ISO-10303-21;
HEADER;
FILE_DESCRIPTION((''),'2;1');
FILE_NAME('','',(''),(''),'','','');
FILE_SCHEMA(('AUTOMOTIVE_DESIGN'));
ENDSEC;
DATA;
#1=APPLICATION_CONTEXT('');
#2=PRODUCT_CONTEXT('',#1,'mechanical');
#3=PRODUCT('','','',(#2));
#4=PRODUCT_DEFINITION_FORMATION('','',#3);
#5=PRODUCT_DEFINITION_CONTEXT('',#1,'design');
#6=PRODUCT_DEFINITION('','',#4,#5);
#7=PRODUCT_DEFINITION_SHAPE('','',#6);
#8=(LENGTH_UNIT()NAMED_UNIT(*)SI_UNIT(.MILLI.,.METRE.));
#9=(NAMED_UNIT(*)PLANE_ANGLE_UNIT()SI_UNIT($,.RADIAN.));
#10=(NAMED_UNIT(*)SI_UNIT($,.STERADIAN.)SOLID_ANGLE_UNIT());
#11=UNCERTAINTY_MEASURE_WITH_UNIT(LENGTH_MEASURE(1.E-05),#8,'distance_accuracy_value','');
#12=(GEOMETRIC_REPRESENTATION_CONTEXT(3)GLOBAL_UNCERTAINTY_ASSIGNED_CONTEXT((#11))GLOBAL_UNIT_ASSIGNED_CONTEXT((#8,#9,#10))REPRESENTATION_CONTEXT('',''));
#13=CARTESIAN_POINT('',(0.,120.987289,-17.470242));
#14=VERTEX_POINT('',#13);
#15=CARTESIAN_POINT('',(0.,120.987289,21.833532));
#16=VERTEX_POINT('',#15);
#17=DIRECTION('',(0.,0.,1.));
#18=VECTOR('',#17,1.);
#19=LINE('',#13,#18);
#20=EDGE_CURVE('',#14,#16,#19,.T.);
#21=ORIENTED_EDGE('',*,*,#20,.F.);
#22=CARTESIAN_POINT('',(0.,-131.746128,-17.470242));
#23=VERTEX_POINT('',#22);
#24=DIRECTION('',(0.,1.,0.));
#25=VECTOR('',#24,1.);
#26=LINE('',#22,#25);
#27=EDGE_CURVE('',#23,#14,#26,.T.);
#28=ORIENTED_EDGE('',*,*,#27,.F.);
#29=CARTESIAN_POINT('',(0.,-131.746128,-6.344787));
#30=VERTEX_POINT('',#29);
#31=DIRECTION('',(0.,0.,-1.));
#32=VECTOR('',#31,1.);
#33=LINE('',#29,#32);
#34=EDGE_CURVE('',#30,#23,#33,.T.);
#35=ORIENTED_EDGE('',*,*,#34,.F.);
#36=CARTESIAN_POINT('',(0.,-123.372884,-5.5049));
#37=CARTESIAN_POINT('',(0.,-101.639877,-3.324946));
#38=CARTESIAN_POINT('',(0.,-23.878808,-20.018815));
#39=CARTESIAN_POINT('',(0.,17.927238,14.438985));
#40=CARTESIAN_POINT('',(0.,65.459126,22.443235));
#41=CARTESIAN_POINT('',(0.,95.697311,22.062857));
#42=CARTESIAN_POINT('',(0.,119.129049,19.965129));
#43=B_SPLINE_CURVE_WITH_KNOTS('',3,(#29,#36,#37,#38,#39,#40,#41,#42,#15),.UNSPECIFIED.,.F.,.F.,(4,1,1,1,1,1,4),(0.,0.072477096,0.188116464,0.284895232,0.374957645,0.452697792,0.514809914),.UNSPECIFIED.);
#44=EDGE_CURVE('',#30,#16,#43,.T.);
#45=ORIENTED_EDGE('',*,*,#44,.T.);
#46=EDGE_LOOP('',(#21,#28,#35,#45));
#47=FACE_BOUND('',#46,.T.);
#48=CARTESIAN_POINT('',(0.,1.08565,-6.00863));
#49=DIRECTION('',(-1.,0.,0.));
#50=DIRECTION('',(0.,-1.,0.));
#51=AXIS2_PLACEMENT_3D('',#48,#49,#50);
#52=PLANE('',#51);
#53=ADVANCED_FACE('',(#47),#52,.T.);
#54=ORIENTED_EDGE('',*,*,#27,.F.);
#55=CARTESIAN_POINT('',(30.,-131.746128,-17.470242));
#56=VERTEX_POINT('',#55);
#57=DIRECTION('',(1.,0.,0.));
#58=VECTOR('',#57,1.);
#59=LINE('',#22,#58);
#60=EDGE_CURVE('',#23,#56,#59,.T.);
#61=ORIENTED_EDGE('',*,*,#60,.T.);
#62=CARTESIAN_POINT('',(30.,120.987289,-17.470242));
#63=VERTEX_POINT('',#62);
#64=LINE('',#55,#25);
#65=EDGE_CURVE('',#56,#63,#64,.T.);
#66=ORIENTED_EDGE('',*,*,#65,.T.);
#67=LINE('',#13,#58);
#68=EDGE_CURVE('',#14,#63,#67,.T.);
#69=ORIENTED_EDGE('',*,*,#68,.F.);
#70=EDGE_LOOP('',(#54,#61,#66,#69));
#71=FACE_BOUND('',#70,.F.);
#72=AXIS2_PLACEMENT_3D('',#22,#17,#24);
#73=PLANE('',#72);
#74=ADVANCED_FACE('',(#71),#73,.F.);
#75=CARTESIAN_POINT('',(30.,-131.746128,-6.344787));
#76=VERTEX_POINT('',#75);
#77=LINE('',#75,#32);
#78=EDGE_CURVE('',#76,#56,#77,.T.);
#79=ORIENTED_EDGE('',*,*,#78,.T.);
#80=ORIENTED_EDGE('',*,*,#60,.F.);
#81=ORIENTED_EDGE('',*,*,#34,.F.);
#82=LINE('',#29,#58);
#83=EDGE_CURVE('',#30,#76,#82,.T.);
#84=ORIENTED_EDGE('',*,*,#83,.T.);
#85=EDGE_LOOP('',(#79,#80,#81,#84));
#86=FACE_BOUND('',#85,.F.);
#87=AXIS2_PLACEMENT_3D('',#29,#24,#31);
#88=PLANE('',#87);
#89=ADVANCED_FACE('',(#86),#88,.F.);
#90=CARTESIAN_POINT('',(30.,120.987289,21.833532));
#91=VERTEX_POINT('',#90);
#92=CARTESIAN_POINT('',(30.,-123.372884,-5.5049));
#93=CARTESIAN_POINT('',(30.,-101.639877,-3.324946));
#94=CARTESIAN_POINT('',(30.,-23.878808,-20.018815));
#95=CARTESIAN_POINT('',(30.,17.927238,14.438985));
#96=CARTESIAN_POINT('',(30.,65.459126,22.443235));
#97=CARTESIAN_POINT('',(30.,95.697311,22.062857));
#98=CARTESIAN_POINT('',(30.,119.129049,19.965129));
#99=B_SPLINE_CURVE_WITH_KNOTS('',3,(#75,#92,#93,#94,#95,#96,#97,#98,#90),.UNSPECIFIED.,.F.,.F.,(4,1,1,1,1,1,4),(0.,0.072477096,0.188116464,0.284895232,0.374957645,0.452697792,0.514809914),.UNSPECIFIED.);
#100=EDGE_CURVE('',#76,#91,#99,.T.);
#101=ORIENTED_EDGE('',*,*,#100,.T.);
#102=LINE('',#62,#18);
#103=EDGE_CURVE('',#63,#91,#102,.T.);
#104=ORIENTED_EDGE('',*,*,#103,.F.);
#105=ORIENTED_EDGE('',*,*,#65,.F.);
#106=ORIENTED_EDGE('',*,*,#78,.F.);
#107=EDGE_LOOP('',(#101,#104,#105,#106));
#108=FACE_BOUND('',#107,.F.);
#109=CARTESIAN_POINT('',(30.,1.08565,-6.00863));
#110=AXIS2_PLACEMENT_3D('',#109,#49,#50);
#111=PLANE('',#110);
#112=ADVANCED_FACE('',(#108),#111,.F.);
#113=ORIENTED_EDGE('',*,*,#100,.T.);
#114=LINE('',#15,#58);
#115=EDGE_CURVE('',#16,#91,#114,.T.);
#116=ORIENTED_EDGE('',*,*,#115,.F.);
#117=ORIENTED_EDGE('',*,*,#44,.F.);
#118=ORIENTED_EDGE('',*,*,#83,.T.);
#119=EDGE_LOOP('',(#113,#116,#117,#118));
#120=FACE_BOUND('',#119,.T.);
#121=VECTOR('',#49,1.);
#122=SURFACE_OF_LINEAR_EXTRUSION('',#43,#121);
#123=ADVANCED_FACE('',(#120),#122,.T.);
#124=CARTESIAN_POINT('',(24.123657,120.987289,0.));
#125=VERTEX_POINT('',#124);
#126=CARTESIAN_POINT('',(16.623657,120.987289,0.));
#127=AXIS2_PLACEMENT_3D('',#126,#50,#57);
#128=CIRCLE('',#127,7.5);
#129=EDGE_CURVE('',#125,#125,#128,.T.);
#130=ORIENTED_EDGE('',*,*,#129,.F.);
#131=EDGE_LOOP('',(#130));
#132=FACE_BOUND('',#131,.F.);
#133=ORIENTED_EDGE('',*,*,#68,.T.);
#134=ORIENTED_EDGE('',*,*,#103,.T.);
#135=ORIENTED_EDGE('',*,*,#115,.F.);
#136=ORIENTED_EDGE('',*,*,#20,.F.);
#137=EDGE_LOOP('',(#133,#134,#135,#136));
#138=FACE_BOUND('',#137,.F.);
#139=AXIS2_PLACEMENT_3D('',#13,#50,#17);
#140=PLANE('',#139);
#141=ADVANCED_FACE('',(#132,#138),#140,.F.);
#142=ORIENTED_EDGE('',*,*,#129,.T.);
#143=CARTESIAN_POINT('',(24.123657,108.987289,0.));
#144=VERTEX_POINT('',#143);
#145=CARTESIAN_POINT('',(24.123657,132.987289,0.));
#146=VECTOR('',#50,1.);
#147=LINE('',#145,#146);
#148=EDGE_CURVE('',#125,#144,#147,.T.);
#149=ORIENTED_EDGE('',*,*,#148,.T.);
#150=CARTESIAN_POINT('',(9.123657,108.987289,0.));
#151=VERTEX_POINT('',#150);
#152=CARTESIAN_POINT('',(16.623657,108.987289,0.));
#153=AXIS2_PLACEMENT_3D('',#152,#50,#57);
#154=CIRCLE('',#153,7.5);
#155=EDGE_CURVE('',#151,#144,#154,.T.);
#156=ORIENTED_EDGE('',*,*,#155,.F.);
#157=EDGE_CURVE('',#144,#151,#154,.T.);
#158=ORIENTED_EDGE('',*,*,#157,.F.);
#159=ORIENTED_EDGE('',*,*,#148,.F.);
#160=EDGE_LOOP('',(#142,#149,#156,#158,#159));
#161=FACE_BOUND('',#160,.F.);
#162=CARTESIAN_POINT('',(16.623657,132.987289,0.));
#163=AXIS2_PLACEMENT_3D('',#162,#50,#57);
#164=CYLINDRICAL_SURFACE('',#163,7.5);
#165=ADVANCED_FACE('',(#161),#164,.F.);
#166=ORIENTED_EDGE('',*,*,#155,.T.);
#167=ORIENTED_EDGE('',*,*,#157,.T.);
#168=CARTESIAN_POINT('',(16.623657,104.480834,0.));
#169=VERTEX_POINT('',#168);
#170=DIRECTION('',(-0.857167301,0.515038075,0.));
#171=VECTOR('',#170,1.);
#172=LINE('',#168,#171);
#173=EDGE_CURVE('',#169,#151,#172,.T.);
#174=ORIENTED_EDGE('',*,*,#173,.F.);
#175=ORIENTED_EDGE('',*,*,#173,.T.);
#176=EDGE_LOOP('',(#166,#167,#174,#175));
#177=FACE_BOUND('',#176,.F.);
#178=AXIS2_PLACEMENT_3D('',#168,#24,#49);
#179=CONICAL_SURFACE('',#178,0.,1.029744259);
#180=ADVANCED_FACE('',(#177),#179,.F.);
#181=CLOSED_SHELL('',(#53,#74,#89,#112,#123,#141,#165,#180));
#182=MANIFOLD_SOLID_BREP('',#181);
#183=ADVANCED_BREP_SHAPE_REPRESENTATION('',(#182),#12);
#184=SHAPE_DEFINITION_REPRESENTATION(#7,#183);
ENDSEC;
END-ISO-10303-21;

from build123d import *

# Parameters (mm, degrees)
F1_DEPTH = 30
F3_D     = 15
F3_DEPTH = 12
F3_TIP   = 4.5064546427


with BuildPart() as f1:
    # F0 (on Right) → F1 (new body)
    with BuildSketch(Plane.YZ):
        with BuildLine():
            add(Edge.make_bspline(
                [(-131.7461282015, -6.3447873108), (-123.3728835246, -5.5048995417), (-101.6398772811, -3.324945792), (-23.878808121, -20.0188151505), (17.9272379867, 14.4389849512), (65.4591264475, 22.4432346678), (95.6973111303, 22.0628570773), (119.1290489196, 19.9651290611), (120.9872886539, 21.8335315585)],
                knots=[0, 0, 0, 0, 0.0724770959, 0.1881164636, 0.2848952315, 0.3749576445, 0.4526977925, 0.5148099141, 0.5148099141, 0.5148099141, 0.5148099141], degree=3))
            Line((-131.7461282015, -6.3447873108), (-131.7461282015, -17.4702424556))
            Line((-131.7461282015, -17.4702424556), (120.9872886539, -17.4702424556))
            Line((120.9872886539, -17.4702424556), (120.9872886539, 21.8335315585))
        make_face()
    extrude(amount=F1_DEPTH)

    # F3
    with Locations(Plane(origin=(0, 120.9872886539, 0), x_dir=(-1, 0, 0), z_dir=(0, 1, 0))):
        with Locations((-16.6236571968, 0)):
            Hole(F3_D / 2, depth=F3_DEPTH)
            with Locations((0, 0, -(F3_DEPTH + F3_TIP / 2))):  # 118° drill point
                Cone(0, F3_D / 2, F3_TIP, mode=Mode.SUBTRACT)


solid = f1.part
